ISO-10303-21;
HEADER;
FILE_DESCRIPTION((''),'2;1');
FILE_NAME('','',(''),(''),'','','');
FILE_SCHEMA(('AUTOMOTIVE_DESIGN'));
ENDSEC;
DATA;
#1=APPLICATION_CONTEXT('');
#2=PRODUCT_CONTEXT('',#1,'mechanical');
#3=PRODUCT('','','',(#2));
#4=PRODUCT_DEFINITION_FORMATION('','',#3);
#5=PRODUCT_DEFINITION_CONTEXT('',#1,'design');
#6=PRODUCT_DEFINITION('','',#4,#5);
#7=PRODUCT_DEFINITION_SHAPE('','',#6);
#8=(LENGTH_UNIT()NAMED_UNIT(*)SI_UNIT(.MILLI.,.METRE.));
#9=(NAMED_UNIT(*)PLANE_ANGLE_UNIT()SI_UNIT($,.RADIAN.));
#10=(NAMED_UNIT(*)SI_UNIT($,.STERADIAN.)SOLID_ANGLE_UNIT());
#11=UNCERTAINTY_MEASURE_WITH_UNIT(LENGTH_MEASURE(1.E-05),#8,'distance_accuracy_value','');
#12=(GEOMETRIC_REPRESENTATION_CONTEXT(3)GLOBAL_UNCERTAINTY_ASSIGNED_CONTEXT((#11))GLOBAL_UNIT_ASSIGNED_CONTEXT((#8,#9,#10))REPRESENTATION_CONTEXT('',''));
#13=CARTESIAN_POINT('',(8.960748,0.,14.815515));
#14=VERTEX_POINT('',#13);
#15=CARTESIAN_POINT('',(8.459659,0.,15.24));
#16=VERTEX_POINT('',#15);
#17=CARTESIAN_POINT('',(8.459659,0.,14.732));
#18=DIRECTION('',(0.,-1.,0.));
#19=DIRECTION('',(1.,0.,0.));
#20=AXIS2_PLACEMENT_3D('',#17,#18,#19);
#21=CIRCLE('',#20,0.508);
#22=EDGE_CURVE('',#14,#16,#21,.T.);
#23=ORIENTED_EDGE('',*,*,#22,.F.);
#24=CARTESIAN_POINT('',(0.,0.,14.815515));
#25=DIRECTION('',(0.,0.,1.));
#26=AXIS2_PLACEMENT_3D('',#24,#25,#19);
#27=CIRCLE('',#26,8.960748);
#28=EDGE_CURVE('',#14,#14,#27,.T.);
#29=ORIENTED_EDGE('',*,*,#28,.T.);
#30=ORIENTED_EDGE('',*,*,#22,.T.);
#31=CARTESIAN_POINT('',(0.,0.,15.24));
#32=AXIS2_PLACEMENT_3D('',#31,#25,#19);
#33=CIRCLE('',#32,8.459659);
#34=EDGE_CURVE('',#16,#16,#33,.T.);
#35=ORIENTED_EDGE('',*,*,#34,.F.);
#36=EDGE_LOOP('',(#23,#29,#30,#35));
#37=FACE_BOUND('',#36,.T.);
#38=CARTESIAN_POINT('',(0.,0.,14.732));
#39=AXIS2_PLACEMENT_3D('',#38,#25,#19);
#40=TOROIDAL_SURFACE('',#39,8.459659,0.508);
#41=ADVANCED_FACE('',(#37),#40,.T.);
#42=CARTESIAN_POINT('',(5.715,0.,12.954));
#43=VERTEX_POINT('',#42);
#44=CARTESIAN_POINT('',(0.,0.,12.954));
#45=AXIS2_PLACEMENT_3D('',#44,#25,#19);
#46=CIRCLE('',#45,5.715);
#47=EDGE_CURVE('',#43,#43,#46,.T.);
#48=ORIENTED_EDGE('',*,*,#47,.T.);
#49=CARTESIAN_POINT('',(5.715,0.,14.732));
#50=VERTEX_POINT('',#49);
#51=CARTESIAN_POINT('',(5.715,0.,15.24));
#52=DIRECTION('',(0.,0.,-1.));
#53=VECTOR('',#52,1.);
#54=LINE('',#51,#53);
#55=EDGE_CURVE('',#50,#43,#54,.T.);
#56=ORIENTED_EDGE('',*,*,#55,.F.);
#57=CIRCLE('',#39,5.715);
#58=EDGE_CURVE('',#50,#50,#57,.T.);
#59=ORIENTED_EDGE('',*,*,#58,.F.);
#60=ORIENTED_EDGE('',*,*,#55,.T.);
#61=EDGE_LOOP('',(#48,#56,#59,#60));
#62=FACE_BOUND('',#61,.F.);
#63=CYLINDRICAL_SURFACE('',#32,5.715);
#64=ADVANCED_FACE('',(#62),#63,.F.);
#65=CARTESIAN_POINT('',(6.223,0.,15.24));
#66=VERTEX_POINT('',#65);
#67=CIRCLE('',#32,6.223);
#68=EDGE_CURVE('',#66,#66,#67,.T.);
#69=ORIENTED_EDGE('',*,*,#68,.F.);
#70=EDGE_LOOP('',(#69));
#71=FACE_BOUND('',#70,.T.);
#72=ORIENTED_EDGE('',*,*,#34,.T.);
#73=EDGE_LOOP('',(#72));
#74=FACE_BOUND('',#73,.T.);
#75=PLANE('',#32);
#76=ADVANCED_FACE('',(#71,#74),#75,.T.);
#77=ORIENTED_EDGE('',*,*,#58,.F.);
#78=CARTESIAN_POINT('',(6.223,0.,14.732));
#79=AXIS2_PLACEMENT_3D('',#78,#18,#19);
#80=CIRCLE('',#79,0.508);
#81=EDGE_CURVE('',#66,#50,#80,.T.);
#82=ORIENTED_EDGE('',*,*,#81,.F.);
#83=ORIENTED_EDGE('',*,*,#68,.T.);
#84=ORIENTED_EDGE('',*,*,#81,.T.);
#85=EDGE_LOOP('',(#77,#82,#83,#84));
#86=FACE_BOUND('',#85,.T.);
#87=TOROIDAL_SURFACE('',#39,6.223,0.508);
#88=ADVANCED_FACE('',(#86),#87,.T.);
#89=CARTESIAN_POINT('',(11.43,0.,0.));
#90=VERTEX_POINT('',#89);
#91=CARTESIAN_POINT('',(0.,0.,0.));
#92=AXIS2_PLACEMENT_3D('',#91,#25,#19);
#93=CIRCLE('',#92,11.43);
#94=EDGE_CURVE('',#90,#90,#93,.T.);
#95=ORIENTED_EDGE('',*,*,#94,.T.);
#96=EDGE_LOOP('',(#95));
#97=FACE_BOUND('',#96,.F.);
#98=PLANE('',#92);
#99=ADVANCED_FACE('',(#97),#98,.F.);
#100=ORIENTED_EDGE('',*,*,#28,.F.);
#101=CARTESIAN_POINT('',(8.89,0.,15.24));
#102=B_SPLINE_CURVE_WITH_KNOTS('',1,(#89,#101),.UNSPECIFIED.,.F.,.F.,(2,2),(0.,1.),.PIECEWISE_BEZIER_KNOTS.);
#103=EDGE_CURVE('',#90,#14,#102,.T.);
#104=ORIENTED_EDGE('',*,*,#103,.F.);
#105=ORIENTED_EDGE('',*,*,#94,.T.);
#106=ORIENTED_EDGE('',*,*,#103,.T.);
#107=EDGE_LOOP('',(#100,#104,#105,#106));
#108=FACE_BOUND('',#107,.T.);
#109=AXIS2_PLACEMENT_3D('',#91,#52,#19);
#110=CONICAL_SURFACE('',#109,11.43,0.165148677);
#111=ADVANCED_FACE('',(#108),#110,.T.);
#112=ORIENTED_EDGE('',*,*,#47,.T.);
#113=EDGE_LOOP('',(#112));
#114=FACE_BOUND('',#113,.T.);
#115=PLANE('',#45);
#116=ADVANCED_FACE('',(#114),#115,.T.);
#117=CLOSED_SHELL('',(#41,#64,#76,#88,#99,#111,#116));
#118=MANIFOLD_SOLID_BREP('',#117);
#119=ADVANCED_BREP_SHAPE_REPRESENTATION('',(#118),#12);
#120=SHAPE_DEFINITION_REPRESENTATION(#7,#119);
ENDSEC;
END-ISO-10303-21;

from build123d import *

# Parameters (mm, degrees)
F0_R     = 11.43
F2_R     = 8.89
F4_R     = 5.715
F5_DEPTH = 2.286
F6_R     = 0.508


with BuildPart() as f3:
    # F0 (on Top) → F3 section 0
    with BuildSketch(Plane.XY):
        Circle(F0_R)
    # F2 (on offset) → F3 section 1
    with BuildSketch(Plane.XY.offset(15.24)):
        Circle(F2_R)
    loft()

    # F4 (on face) → F5 (cut)
    with BuildSketch(Plane.XY.offset(15.24)):
        Circle(F4_R)
    extrude(amount=-F5_DEPTH, mode=Mode.SUBTRACT)

    # F6
    f6_edges = [f3.edges().sort_by_distance(p)[0] for p in [
        (-5.715, 0, 15.24),
        (-8.89, 0, 15.24),
    ]]
    fillet(f6_edges, radius=F6_R)


solid = f3.part
